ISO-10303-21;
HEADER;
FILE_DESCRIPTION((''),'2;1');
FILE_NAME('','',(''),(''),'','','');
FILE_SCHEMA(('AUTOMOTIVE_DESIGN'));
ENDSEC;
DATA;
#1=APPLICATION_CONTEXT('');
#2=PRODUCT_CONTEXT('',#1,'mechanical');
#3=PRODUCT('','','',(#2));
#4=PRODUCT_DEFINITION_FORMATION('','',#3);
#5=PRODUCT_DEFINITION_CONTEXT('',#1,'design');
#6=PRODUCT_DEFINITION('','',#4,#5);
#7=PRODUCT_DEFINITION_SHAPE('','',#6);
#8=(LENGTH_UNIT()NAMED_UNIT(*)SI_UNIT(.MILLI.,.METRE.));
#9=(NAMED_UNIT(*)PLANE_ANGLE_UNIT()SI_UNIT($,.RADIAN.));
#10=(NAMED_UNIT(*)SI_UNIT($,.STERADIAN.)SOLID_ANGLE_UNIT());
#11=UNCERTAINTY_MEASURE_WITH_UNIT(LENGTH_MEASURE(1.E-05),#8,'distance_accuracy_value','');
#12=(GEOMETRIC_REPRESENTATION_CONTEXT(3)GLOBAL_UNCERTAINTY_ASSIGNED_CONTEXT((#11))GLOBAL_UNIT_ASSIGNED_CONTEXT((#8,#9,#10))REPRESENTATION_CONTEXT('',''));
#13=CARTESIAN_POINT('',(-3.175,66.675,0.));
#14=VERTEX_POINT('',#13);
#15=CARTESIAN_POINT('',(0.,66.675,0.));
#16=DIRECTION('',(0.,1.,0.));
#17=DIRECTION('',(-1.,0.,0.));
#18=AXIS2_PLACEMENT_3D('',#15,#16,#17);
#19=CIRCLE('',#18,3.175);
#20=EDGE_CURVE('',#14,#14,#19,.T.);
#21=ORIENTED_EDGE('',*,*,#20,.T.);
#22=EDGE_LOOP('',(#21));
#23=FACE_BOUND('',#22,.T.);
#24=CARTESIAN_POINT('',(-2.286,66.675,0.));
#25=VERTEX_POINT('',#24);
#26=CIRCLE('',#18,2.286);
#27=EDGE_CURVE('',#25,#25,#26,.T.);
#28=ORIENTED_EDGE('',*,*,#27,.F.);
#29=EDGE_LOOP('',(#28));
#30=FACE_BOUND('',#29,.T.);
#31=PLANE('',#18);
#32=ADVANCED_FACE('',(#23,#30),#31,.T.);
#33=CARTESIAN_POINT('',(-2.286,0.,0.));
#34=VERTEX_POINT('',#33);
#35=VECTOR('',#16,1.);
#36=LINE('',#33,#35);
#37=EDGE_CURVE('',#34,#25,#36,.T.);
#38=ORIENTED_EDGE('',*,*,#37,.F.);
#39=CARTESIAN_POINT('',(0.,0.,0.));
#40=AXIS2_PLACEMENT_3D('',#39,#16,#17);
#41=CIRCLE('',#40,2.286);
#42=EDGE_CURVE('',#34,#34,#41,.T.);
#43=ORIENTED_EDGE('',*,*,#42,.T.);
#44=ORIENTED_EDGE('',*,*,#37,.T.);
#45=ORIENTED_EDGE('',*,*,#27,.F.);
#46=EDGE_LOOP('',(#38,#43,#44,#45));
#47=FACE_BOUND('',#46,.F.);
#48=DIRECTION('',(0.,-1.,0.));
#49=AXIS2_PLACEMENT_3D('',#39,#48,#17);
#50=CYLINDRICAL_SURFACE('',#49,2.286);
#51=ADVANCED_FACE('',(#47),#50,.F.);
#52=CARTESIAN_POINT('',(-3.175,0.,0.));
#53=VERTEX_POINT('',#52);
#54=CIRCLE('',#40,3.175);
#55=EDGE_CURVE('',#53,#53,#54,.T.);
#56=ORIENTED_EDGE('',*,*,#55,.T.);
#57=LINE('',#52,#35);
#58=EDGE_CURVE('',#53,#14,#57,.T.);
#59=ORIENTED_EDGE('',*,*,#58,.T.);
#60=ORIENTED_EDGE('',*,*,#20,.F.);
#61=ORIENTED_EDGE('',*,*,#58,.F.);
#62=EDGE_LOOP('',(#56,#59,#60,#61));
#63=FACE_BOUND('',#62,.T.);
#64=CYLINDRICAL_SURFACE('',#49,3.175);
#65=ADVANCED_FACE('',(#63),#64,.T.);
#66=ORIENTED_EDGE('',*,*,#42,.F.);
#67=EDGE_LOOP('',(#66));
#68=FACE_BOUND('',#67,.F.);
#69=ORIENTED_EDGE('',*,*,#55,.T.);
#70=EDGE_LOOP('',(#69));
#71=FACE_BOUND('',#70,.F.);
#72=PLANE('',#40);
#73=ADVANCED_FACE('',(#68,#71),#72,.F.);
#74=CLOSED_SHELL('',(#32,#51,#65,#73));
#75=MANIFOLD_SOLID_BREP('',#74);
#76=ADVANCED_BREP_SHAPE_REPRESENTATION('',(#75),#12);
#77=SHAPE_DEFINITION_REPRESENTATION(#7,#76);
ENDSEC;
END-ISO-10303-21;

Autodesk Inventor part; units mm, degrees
ref_plane "YZ Plane" through (0, 0, 0) normal (1, 0, 0) x (0, 1, 0)
ref_plane "XZ Plane" through (0, 0, 0) normal (0, 1, 0) x (-1, 0, 0)
ref_plane "XY Plane" through (0, 0, 0) normal (0, 0, 1) x (1, 0, 0)
sketch "Sketch1" plane through (0, 0, 0) normal (0, 1, 0) x (-1, 0, 0)
  circle A0 centre (0, 0) radius 3.175
  circle A1 centre (0, 0) radius 2.286
  dimension "d0" = 6.35
  dimension "d1" = 4.572
extrude "Extrusion1" add sketch "Sketch1" along normal blind 66.675
thread "Thread1" size "1/4-20 UNC" class "2A" standard "ANSI Unified Screw Threads" length 6.35
thread "Thread2" size "1/4-20 UNC" class "2A" standard "ANSI Unified Screw Threads" length 6.35
properties part number "Shaft - Flywheel" material "Steel, Alloy"
